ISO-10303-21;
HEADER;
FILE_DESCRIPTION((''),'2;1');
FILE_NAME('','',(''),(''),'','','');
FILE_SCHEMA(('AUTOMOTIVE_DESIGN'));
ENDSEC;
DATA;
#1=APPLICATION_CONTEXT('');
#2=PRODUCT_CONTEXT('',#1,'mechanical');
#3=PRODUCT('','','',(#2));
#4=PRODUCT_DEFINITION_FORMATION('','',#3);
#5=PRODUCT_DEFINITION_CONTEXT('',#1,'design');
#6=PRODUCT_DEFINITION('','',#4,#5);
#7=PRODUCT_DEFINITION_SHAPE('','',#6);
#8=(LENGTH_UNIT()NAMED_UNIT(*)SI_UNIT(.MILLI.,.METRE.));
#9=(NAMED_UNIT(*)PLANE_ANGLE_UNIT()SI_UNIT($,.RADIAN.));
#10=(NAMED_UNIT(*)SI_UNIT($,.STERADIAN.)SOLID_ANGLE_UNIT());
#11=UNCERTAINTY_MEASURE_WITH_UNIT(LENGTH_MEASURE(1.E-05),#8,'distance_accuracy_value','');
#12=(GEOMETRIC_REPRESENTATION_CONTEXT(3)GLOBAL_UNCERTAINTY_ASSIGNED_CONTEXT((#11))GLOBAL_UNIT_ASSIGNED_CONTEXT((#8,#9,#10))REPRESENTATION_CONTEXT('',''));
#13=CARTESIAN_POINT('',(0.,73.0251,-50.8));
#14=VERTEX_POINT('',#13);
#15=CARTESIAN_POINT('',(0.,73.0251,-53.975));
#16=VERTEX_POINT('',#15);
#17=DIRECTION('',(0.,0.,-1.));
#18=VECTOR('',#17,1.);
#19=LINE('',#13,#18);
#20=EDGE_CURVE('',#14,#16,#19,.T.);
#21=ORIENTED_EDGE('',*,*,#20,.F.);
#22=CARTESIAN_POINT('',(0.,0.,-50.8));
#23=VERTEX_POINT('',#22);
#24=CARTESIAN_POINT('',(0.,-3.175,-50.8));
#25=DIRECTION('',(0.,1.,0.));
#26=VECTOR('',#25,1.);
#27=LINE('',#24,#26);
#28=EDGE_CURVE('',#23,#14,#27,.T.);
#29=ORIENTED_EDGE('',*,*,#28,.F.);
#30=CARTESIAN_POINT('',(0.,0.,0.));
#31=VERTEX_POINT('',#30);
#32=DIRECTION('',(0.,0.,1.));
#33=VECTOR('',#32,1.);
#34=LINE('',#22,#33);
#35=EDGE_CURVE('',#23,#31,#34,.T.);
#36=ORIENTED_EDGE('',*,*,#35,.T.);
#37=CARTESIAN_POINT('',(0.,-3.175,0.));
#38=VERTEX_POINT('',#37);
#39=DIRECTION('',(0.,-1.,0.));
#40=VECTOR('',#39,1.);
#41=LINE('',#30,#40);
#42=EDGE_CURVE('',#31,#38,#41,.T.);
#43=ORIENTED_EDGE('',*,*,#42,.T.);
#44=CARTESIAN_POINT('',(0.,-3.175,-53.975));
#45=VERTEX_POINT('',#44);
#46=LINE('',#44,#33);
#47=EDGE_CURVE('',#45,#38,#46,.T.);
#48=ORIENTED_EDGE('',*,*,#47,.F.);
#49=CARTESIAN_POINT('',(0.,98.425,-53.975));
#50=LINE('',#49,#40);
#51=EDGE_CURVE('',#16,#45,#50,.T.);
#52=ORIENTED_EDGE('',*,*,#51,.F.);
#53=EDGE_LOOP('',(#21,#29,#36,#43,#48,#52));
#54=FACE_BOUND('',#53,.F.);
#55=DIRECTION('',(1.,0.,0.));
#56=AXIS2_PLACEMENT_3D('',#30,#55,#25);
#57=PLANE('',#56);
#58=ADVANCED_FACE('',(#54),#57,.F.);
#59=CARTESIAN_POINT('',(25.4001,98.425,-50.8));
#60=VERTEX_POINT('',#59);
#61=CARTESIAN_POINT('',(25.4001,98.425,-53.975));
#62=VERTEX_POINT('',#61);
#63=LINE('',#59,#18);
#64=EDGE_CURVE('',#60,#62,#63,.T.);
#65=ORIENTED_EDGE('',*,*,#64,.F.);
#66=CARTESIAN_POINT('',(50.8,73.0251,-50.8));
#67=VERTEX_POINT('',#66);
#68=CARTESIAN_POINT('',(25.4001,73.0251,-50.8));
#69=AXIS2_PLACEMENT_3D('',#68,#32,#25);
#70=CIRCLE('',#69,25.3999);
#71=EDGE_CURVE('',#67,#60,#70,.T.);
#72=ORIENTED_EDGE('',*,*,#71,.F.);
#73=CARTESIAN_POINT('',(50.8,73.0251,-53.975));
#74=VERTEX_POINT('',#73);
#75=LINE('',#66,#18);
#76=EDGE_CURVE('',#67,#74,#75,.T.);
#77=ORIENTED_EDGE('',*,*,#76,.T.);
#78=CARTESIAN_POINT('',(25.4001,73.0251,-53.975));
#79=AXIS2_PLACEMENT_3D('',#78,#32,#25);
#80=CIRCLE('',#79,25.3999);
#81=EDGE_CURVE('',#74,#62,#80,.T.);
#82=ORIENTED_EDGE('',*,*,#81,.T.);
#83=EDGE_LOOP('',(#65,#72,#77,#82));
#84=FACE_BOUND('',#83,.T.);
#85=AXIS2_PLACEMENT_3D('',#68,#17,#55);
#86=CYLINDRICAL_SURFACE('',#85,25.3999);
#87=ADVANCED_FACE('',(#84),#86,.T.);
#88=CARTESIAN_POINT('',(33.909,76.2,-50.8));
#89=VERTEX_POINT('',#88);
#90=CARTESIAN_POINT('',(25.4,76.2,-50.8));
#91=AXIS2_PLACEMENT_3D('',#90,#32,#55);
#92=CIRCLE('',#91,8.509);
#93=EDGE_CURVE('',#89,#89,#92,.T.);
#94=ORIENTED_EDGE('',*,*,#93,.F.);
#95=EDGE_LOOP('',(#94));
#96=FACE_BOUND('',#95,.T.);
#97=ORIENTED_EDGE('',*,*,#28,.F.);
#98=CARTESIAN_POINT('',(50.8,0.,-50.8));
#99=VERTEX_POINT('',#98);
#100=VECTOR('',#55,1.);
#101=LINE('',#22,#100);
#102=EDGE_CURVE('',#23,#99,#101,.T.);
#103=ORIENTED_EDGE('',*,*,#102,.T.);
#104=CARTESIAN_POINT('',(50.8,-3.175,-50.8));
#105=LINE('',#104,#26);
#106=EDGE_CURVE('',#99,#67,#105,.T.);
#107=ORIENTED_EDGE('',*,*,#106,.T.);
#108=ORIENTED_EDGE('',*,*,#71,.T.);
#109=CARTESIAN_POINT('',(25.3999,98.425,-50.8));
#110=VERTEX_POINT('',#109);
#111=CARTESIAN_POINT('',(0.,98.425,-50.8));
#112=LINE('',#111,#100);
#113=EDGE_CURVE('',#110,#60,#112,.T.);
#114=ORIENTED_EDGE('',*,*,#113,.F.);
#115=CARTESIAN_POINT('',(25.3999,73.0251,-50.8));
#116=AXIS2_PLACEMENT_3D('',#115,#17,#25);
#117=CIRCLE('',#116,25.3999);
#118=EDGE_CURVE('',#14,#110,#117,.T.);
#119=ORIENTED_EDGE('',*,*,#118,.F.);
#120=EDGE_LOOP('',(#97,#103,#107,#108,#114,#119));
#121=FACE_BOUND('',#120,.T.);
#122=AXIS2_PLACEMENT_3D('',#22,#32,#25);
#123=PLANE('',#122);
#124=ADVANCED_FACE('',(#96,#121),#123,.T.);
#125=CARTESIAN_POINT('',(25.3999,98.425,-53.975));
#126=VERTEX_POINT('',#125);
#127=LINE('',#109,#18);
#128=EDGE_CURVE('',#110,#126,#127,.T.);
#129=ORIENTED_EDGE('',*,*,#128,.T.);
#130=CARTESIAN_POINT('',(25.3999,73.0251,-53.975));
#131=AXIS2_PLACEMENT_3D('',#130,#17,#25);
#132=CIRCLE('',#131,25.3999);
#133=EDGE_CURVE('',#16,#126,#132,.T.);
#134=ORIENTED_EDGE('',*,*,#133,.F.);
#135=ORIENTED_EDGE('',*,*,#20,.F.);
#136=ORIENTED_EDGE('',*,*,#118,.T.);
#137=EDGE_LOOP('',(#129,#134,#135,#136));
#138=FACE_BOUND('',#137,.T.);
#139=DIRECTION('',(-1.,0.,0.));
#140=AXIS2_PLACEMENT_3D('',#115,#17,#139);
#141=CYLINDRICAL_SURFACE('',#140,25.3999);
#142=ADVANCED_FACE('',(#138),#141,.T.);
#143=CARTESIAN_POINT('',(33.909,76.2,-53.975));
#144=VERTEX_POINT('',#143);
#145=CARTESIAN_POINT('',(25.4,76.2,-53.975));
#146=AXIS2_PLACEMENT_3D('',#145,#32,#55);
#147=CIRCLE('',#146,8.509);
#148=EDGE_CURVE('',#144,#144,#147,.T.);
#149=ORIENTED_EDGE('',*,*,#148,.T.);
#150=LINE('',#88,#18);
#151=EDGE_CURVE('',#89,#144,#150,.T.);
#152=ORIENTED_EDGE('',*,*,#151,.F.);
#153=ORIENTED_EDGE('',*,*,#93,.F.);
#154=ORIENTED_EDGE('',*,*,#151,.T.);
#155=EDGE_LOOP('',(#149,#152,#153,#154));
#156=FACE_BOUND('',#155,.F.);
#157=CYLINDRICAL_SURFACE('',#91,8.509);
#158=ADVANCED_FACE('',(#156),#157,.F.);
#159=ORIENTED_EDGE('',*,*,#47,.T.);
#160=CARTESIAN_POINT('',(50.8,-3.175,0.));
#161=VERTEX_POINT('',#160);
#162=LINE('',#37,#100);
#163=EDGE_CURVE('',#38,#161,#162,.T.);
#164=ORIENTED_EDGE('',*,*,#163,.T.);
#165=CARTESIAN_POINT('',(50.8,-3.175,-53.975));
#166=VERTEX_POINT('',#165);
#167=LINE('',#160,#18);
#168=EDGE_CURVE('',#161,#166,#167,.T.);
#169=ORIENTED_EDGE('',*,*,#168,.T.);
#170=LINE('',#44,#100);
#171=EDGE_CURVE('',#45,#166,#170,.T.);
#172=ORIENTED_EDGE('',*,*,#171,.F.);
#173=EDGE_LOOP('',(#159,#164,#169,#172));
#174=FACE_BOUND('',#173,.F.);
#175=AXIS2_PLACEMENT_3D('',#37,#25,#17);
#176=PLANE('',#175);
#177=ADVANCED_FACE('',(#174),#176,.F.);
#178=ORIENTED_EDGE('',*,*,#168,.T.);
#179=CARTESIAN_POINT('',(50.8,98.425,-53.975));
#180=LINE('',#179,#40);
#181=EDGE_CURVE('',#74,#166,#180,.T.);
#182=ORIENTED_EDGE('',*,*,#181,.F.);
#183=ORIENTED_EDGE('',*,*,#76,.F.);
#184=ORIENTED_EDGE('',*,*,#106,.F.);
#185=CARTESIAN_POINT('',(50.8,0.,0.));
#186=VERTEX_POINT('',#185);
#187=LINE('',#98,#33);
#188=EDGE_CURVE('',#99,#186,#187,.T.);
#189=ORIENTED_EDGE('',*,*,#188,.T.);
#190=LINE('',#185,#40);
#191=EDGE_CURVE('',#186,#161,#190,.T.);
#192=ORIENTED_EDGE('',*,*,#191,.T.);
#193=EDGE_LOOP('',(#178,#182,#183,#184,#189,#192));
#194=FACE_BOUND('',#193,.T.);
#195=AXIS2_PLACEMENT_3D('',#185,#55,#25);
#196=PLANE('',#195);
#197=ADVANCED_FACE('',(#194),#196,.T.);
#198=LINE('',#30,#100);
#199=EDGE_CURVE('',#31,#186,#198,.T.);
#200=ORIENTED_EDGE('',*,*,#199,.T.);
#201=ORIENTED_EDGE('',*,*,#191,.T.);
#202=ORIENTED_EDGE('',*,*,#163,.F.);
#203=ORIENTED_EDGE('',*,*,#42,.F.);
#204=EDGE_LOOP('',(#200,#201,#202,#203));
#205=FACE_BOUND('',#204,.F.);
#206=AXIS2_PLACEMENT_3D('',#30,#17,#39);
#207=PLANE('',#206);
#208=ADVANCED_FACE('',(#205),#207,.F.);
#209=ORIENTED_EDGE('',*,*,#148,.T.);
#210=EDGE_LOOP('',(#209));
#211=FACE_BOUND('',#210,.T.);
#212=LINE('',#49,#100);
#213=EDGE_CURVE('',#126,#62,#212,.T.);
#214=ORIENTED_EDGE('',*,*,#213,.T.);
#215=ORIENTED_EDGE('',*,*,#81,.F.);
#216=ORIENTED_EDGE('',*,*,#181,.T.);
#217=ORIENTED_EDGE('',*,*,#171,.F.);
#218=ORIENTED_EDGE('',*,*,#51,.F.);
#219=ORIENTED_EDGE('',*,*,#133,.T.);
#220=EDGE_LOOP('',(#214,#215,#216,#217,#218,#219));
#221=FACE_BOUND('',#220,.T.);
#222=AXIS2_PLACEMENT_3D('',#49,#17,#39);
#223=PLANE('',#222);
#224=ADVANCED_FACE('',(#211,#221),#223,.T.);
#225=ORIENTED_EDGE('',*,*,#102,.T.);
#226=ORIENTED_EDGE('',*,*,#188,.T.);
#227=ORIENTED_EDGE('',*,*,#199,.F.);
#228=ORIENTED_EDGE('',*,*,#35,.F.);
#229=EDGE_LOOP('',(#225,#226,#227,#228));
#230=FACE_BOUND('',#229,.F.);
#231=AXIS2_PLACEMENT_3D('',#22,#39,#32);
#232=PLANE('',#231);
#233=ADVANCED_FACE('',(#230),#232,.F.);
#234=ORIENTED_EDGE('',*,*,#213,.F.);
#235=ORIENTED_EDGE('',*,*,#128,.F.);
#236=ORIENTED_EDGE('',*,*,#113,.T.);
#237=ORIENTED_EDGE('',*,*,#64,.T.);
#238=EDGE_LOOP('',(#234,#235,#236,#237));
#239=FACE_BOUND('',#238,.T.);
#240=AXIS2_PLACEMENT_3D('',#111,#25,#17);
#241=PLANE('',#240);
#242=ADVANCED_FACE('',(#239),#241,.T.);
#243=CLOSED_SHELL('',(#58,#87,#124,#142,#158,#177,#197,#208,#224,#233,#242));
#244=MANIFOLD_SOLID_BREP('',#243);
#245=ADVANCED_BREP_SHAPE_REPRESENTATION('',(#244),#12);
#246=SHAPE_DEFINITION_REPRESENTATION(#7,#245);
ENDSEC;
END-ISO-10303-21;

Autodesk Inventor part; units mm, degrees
ref_plane "YZ Plane" through (0, 0, 0) normal (1, 0, 0) x (0, 1, 0)
ref_plane "XZ Plane" through (0, 0, 0) normal (0, 1, 0) x (-1, 0, 0)
ref_plane "XY Plane" through (0, 0, 0) normal (0, 0, 1) x (1, 0, 0)
sketch "Sketch1" plane through (0, 0, 0) normal (1, 0, 0) x (0, 1, 0)
  line L0 (0, 0) -> (-3.175, 0)
  line L1 (-3.175, 0) -> (-3.175, -50.8)
  line L2 (-3.175, -50.8) -> (0, -50.8)
  line L3 (0, -50.8) -> (0, 0)
  line L4 (-3.175, -50.8) -> (98.425, -50.8)
  line L5 (98.425, -50.8) -> (98.425, -53.975)
  line L6 (98.425, -53.975) -> (-3.175, -53.975)
  line L7 (-3.175, -53.975) -> (-3.175, -50.8)
  dimension "d0" = 3.175
  dimension "d1" = 50.8
  dimension "d2" = 101.6
  dimension "d3" = 3.175
extrude "Extrusion1" add sketch "Sketch1" along normal blind 50.8
sketch "Sketch2" plane through (0, 0, -50.8) normal (0, 0, 1) x (1, 0, 0)
  circle A0 centre (25.4, 76.2) radius 8.509
  line L0 (0, 98.425) -> (0, 0) projected
  line L1 (0, 0) -> (50.8, 0) projected
  dimension "d6" = 17.018
  dimension "d7" = 25.4
  dimension "d8" = 76.2
extrude "Extrusion2" cut sketch "Sketch2" against normal through all
fillet "Fillet1" radius 25.4 2 edges at (50.8, 98.425, -52.3875) (0, 98.425, -52.3875)
properties part number "L Connector Ramp" material "Aluminum 6061"
